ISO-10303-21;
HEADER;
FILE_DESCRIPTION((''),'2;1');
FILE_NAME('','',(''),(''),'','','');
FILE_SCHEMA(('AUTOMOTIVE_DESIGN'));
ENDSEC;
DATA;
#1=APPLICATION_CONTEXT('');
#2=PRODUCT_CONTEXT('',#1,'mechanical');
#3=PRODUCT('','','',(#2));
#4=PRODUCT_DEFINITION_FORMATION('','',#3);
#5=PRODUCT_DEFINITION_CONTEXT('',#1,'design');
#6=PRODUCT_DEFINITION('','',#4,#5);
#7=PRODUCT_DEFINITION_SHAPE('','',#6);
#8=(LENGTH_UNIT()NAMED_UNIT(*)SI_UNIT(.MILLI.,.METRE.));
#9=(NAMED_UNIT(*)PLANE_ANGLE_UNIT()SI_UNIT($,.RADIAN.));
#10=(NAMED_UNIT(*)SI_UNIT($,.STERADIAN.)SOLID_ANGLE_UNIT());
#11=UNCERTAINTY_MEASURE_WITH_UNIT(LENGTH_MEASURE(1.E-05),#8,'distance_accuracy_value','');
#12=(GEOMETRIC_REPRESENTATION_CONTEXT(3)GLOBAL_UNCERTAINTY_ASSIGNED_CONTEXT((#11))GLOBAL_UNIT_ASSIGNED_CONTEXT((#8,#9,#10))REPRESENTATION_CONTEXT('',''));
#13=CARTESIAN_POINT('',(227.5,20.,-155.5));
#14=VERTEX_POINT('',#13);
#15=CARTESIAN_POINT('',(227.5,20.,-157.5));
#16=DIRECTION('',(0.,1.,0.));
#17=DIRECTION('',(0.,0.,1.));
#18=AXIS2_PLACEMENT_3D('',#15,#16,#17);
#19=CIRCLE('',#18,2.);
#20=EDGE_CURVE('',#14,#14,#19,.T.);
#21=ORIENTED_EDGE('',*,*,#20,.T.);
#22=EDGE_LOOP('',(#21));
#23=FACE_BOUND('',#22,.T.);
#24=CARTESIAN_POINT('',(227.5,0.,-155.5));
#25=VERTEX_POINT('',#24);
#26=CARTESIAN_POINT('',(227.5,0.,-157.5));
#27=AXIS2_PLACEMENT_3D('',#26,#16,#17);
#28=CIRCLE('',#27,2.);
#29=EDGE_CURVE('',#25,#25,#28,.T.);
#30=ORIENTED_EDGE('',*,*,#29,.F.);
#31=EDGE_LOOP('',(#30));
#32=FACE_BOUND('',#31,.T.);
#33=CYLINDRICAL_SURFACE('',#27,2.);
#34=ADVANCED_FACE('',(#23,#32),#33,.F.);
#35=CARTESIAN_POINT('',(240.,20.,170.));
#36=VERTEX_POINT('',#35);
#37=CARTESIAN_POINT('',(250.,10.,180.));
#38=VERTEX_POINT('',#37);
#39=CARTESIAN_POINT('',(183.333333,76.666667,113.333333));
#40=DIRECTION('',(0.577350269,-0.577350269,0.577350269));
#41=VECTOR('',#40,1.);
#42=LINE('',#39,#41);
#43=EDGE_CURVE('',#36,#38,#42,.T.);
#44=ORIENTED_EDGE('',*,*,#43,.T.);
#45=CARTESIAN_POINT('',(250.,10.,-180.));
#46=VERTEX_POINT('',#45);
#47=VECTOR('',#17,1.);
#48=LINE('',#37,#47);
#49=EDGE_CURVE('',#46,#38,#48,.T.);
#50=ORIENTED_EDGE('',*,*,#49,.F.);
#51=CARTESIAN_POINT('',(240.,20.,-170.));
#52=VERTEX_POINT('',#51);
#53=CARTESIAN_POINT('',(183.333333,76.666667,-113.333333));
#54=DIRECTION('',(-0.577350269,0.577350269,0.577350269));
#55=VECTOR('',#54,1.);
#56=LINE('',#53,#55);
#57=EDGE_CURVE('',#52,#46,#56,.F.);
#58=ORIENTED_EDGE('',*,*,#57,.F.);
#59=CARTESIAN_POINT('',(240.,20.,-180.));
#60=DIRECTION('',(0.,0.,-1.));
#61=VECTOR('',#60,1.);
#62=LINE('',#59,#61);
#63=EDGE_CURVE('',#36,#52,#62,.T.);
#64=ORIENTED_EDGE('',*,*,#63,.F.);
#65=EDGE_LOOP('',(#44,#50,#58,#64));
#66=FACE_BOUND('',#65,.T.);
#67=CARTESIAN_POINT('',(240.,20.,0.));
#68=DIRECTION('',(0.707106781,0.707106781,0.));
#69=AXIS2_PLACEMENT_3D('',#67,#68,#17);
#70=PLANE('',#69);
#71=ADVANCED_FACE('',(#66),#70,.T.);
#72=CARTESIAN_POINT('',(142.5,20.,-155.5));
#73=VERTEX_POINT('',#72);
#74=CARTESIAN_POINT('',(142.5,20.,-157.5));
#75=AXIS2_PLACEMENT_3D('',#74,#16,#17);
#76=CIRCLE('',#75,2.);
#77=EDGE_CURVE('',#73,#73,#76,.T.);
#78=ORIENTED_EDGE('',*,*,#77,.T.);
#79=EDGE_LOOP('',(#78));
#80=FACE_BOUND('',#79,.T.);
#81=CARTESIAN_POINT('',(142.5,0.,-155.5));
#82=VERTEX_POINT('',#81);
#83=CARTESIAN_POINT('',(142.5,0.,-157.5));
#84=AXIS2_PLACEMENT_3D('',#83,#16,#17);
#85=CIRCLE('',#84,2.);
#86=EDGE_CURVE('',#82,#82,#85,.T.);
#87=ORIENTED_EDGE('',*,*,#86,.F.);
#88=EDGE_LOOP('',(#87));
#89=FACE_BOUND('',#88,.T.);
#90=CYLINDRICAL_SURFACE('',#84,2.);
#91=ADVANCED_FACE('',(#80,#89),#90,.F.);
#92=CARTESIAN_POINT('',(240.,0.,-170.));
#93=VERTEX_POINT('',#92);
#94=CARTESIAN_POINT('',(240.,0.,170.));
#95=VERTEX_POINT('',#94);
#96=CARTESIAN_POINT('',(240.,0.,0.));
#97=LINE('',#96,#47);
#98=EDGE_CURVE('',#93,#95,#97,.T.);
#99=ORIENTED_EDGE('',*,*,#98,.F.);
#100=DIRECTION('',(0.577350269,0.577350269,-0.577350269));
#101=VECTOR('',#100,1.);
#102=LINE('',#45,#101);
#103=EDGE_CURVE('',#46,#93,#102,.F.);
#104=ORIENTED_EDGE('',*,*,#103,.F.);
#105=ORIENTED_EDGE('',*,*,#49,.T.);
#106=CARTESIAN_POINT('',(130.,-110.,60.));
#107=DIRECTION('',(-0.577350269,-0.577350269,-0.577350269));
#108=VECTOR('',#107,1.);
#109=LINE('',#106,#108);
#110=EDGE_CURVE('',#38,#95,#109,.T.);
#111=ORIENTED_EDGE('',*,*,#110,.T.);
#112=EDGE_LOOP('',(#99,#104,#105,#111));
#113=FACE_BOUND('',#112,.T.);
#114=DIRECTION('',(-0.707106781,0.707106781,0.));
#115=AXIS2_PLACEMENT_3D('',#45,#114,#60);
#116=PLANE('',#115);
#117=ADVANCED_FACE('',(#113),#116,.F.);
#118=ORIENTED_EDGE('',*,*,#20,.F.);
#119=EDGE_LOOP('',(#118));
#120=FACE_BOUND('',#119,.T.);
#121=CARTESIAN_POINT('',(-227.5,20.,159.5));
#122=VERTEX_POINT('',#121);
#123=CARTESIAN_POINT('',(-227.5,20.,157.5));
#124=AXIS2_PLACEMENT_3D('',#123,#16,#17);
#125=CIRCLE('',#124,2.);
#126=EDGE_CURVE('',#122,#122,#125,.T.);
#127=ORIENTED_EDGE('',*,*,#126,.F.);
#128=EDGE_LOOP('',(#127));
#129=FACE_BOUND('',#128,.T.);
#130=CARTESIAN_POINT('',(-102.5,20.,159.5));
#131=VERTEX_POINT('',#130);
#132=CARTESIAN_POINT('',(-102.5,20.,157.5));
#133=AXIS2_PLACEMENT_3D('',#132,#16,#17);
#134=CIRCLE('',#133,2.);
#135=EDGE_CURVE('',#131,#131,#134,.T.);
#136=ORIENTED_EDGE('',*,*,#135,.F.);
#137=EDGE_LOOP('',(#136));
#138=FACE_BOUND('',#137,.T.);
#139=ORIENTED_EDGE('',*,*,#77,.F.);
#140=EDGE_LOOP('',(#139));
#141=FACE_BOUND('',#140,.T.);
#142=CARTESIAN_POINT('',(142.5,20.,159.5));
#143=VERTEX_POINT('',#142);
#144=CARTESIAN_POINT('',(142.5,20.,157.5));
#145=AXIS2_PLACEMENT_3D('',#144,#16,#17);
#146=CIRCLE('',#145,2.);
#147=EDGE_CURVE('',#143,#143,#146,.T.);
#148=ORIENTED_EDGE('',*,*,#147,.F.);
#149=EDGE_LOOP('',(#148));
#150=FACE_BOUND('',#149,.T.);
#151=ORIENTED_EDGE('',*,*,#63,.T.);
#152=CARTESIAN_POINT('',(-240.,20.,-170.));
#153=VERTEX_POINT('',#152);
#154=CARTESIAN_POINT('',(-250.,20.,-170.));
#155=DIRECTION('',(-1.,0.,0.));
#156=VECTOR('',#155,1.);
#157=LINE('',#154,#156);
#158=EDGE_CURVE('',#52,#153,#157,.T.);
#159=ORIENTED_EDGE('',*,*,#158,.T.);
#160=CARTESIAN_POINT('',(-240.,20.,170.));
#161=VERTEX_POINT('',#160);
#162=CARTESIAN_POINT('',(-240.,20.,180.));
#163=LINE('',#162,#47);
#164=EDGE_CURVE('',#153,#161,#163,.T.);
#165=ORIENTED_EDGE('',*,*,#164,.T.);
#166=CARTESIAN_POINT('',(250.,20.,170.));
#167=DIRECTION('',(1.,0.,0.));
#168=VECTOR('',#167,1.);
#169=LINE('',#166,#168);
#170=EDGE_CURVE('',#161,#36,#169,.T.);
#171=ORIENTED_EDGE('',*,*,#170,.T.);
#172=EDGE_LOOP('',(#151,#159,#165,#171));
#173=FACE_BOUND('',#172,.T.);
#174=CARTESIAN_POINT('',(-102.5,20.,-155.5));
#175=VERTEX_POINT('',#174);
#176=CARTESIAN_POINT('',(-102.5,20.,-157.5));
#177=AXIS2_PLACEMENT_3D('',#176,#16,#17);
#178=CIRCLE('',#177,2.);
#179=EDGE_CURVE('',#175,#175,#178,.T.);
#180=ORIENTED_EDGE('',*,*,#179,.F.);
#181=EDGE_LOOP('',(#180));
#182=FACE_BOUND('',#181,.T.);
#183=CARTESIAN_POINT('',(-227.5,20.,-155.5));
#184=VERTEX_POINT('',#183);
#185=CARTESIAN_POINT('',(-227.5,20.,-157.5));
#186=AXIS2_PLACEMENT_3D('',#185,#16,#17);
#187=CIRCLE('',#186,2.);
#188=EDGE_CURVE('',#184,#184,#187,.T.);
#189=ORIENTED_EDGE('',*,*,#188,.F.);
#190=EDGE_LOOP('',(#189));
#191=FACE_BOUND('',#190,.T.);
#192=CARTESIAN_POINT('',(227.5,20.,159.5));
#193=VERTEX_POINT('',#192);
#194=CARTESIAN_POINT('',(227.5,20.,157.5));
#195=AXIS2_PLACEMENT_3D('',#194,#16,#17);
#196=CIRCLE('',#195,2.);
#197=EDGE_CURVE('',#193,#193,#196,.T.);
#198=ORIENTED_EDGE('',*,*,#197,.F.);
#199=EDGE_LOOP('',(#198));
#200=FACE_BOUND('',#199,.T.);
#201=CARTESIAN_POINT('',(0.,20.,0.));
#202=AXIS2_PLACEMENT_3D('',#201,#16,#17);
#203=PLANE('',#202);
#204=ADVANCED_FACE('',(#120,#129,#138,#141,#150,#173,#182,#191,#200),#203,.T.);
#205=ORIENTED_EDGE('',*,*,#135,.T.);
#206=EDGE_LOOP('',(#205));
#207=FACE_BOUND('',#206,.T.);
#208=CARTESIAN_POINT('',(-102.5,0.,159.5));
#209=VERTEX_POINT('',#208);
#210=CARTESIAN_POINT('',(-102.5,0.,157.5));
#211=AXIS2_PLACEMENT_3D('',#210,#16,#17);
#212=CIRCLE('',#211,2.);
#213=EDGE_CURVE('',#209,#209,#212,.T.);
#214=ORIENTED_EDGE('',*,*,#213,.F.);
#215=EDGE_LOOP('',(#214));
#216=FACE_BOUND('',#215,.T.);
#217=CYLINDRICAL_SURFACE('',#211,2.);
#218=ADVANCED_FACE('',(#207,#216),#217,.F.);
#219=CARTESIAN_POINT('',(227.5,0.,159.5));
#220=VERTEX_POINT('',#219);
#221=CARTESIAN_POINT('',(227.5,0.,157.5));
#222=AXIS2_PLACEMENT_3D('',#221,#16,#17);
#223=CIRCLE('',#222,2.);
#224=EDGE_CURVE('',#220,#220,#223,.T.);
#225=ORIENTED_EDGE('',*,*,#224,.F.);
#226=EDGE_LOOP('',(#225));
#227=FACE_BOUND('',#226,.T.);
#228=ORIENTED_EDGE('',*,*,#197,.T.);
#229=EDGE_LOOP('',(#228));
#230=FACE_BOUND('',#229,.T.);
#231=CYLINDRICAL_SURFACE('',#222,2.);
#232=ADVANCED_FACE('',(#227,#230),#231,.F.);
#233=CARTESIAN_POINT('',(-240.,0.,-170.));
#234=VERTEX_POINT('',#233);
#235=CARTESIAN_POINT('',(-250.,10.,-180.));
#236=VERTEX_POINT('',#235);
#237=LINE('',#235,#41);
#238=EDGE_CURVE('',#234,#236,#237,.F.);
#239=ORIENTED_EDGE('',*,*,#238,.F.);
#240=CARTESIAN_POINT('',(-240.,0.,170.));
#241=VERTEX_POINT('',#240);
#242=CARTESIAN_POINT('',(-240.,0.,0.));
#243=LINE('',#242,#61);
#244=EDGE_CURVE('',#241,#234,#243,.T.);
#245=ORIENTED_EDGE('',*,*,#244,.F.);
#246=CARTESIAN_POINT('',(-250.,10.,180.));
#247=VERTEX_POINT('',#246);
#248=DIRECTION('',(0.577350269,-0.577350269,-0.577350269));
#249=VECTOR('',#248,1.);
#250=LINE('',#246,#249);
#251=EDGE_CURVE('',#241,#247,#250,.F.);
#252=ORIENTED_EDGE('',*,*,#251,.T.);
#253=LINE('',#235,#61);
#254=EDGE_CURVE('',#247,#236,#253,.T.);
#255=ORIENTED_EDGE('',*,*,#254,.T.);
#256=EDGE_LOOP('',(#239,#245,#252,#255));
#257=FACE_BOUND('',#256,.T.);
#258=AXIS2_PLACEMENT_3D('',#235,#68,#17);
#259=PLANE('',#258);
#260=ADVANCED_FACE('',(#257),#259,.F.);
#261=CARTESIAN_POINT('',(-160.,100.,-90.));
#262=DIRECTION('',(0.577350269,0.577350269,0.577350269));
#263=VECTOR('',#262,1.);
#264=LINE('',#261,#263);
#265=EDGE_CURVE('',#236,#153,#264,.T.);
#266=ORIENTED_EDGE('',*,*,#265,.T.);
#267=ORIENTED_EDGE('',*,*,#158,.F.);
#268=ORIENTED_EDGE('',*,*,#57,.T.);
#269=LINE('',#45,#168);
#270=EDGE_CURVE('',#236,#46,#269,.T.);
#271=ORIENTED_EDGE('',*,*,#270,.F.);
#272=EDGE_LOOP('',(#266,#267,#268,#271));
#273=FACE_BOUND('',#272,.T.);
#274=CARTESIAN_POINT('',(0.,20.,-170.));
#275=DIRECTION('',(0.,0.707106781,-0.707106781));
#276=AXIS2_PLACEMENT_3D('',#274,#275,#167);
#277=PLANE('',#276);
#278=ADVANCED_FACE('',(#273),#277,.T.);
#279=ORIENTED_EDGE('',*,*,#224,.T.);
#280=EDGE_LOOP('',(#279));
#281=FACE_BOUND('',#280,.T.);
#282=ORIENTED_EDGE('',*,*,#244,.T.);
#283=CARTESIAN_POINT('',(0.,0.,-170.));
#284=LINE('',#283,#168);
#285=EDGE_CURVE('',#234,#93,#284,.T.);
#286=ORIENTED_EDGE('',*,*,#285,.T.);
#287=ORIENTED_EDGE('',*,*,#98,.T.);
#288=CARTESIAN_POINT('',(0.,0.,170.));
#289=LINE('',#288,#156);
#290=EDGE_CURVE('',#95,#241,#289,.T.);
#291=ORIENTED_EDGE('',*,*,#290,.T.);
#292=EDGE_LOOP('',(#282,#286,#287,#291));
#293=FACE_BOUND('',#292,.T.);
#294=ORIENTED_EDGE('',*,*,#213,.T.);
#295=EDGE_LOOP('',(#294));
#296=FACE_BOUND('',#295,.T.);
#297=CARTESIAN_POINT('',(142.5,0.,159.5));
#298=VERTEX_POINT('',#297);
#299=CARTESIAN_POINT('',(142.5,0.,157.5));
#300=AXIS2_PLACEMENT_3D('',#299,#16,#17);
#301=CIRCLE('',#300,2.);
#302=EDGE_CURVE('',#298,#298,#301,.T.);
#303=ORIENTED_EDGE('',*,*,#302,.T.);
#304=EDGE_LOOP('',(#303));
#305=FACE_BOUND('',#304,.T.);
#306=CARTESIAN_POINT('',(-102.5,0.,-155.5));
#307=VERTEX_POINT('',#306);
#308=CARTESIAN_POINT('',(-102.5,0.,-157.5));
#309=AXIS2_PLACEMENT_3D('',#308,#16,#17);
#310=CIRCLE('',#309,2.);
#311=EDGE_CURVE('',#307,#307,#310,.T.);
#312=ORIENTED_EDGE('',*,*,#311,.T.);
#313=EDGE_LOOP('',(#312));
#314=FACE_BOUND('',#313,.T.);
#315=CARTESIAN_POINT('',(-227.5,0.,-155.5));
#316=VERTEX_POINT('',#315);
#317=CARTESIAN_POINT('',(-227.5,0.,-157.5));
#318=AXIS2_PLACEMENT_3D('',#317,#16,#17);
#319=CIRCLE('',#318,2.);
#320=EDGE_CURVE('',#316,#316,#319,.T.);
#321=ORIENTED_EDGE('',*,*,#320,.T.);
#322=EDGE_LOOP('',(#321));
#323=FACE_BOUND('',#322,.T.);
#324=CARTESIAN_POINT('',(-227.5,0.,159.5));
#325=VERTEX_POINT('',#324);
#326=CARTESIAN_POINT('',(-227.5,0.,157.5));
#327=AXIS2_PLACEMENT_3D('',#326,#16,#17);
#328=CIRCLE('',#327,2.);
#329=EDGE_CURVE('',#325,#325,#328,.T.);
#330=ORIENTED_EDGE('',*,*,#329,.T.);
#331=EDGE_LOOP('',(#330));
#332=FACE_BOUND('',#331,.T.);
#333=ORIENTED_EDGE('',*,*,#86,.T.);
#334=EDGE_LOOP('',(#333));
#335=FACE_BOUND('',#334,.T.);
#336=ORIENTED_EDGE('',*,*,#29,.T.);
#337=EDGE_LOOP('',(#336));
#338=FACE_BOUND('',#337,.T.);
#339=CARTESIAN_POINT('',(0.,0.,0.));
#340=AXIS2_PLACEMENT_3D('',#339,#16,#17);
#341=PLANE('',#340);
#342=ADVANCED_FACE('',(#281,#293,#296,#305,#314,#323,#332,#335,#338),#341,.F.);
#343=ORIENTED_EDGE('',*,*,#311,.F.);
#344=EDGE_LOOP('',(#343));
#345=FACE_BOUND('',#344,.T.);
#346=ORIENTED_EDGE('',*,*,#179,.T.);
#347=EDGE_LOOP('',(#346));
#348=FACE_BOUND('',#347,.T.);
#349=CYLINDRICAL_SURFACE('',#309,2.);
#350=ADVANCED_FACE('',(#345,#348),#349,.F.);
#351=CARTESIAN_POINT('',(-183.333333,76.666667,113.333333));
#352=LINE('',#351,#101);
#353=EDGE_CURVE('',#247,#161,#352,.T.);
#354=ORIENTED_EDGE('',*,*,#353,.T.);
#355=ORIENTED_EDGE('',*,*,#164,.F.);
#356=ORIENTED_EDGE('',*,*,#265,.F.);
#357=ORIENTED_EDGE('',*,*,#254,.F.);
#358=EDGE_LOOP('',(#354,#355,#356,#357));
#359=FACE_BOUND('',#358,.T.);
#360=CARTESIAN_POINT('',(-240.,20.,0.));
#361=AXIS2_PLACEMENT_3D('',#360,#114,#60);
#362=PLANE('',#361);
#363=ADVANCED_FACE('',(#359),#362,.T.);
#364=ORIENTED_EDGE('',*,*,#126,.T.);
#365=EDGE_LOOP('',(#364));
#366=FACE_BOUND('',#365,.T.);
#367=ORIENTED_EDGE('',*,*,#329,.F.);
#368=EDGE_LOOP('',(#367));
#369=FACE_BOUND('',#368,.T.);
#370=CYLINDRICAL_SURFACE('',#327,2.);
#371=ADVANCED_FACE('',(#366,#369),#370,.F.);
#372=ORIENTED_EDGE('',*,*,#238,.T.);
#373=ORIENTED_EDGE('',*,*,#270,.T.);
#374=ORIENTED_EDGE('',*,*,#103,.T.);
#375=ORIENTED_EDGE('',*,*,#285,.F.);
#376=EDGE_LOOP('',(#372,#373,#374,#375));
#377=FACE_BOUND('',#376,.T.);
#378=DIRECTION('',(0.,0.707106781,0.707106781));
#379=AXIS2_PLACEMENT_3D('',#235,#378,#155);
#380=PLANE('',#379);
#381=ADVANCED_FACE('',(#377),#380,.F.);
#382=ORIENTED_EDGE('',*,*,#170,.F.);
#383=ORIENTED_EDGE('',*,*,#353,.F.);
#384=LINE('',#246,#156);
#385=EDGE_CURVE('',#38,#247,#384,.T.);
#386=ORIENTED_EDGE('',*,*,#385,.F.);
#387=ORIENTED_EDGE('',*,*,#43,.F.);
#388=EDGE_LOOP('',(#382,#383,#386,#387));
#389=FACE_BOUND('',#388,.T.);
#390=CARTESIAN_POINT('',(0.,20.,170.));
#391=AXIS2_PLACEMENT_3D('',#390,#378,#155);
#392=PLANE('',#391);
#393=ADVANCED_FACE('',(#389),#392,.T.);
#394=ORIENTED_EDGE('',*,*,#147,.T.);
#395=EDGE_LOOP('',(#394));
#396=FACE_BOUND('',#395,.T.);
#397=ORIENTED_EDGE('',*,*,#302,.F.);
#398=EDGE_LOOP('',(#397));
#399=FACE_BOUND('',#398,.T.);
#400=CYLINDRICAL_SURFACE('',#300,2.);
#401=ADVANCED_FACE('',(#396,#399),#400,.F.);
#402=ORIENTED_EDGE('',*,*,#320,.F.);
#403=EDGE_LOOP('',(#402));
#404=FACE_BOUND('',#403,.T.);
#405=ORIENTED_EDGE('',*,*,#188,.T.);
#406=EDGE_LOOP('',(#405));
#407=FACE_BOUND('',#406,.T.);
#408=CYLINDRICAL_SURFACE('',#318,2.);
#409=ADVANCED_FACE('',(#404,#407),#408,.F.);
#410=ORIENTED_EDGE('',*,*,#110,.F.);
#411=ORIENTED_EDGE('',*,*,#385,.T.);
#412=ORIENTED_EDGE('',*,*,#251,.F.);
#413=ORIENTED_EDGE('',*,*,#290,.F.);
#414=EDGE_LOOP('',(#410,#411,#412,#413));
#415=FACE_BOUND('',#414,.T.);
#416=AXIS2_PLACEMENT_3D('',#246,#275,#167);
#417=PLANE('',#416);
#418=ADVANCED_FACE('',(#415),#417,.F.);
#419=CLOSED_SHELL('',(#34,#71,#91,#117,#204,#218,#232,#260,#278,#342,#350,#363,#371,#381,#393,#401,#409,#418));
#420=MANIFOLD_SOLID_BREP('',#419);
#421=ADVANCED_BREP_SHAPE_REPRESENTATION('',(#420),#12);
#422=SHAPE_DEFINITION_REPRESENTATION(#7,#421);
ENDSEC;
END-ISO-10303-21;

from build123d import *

# Parameters (mm, degrees)
SKIZZE1_W                       = 500
SKIZZE1_H                       = 360
AUFSATZ_LINEAR_AUSTRAGEN1_DEPTH = 20
FASE1_SIZE                      = 10
SKIZZE3_R                       = 2
SCHNITT_LINEAR_AUSTRAGEN1_DEPTH = 309.706980809


with BuildPart() as part:
    # Skizze1 → Aufsatz-Linear austragen1 (new body)
    with BuildSketch(Plane(origin=(0, 0, 0), x_dir=(1, 0, 0), z_dir=(0, 1, 0))):
        Rectangle(SKIZZE1_W, SKIZZE1_H)
    extrude(amount=AUFSATZ_LINEAR_AUSTRAGEN1_DEPTH)

    # Fase1
    fase1_edges = [part.edges().sort_by_distance(p)[0] for p in [
        (0, 20, 180),
        (-250, 20, 0),
        (0, 20, -180),
        (250, 20, 0),
        (0, 0, -180),
        (-250, 0, 0),
        (0, 0, 180),
        (250, 0, 0),
    ]]
    chamfer(fase1_edges, length=FASE1_SIZE - 0.0001)  # a hair under: the kernel refuses the full size

    # Skizze3 → Schnitt-Linear austragen1 (cut, through all)
    with BuildSketch(Plane(origin=(0, 20, 0), x_dir=(1, 0, 0), z_dir=(0, 1, 0))):
        with Locations(Location((-227.5, 157.5, 0), (0, 0, 270))):
            Circle(SKIZZE3_R)
        with Locations(Location((-102.5, 157.5, 0), (0, 0, 270))):
            Circle(SKIZZE3_R)
        with Locations(Location((142.5, 157.5, 0), (0, 0, 270))):
            Circle(SKIZZE3_R)
        with Locations(Location((227.5, 157.5, 0), (0, 0, 270))):
            Circle(SKIZZE3_R)
        with Locations(Location((227.5, -157.5, 0), (0, 0, 270))):
            Circle(SKIZZE3_R)
        with Locations(Location((142.5, -157.5, 0), (0, 0, 270))):
            Circle(SKIZZE3_R)
        with Locations(Location((-102.5, -157.5, 0), (0, 0, 270))):
            Circle(SKIZZE3_R)
        with Locations(Location((-227.5, -157.5, 0), (0, 0, 270))):
            Circle(SKIZZE3_R)
    extrude(amount=-SCHNITT_LINEAR_AUSTRAGEN1_DEPTH, mode=Mode.SUBTRACT)


solid = part.part
